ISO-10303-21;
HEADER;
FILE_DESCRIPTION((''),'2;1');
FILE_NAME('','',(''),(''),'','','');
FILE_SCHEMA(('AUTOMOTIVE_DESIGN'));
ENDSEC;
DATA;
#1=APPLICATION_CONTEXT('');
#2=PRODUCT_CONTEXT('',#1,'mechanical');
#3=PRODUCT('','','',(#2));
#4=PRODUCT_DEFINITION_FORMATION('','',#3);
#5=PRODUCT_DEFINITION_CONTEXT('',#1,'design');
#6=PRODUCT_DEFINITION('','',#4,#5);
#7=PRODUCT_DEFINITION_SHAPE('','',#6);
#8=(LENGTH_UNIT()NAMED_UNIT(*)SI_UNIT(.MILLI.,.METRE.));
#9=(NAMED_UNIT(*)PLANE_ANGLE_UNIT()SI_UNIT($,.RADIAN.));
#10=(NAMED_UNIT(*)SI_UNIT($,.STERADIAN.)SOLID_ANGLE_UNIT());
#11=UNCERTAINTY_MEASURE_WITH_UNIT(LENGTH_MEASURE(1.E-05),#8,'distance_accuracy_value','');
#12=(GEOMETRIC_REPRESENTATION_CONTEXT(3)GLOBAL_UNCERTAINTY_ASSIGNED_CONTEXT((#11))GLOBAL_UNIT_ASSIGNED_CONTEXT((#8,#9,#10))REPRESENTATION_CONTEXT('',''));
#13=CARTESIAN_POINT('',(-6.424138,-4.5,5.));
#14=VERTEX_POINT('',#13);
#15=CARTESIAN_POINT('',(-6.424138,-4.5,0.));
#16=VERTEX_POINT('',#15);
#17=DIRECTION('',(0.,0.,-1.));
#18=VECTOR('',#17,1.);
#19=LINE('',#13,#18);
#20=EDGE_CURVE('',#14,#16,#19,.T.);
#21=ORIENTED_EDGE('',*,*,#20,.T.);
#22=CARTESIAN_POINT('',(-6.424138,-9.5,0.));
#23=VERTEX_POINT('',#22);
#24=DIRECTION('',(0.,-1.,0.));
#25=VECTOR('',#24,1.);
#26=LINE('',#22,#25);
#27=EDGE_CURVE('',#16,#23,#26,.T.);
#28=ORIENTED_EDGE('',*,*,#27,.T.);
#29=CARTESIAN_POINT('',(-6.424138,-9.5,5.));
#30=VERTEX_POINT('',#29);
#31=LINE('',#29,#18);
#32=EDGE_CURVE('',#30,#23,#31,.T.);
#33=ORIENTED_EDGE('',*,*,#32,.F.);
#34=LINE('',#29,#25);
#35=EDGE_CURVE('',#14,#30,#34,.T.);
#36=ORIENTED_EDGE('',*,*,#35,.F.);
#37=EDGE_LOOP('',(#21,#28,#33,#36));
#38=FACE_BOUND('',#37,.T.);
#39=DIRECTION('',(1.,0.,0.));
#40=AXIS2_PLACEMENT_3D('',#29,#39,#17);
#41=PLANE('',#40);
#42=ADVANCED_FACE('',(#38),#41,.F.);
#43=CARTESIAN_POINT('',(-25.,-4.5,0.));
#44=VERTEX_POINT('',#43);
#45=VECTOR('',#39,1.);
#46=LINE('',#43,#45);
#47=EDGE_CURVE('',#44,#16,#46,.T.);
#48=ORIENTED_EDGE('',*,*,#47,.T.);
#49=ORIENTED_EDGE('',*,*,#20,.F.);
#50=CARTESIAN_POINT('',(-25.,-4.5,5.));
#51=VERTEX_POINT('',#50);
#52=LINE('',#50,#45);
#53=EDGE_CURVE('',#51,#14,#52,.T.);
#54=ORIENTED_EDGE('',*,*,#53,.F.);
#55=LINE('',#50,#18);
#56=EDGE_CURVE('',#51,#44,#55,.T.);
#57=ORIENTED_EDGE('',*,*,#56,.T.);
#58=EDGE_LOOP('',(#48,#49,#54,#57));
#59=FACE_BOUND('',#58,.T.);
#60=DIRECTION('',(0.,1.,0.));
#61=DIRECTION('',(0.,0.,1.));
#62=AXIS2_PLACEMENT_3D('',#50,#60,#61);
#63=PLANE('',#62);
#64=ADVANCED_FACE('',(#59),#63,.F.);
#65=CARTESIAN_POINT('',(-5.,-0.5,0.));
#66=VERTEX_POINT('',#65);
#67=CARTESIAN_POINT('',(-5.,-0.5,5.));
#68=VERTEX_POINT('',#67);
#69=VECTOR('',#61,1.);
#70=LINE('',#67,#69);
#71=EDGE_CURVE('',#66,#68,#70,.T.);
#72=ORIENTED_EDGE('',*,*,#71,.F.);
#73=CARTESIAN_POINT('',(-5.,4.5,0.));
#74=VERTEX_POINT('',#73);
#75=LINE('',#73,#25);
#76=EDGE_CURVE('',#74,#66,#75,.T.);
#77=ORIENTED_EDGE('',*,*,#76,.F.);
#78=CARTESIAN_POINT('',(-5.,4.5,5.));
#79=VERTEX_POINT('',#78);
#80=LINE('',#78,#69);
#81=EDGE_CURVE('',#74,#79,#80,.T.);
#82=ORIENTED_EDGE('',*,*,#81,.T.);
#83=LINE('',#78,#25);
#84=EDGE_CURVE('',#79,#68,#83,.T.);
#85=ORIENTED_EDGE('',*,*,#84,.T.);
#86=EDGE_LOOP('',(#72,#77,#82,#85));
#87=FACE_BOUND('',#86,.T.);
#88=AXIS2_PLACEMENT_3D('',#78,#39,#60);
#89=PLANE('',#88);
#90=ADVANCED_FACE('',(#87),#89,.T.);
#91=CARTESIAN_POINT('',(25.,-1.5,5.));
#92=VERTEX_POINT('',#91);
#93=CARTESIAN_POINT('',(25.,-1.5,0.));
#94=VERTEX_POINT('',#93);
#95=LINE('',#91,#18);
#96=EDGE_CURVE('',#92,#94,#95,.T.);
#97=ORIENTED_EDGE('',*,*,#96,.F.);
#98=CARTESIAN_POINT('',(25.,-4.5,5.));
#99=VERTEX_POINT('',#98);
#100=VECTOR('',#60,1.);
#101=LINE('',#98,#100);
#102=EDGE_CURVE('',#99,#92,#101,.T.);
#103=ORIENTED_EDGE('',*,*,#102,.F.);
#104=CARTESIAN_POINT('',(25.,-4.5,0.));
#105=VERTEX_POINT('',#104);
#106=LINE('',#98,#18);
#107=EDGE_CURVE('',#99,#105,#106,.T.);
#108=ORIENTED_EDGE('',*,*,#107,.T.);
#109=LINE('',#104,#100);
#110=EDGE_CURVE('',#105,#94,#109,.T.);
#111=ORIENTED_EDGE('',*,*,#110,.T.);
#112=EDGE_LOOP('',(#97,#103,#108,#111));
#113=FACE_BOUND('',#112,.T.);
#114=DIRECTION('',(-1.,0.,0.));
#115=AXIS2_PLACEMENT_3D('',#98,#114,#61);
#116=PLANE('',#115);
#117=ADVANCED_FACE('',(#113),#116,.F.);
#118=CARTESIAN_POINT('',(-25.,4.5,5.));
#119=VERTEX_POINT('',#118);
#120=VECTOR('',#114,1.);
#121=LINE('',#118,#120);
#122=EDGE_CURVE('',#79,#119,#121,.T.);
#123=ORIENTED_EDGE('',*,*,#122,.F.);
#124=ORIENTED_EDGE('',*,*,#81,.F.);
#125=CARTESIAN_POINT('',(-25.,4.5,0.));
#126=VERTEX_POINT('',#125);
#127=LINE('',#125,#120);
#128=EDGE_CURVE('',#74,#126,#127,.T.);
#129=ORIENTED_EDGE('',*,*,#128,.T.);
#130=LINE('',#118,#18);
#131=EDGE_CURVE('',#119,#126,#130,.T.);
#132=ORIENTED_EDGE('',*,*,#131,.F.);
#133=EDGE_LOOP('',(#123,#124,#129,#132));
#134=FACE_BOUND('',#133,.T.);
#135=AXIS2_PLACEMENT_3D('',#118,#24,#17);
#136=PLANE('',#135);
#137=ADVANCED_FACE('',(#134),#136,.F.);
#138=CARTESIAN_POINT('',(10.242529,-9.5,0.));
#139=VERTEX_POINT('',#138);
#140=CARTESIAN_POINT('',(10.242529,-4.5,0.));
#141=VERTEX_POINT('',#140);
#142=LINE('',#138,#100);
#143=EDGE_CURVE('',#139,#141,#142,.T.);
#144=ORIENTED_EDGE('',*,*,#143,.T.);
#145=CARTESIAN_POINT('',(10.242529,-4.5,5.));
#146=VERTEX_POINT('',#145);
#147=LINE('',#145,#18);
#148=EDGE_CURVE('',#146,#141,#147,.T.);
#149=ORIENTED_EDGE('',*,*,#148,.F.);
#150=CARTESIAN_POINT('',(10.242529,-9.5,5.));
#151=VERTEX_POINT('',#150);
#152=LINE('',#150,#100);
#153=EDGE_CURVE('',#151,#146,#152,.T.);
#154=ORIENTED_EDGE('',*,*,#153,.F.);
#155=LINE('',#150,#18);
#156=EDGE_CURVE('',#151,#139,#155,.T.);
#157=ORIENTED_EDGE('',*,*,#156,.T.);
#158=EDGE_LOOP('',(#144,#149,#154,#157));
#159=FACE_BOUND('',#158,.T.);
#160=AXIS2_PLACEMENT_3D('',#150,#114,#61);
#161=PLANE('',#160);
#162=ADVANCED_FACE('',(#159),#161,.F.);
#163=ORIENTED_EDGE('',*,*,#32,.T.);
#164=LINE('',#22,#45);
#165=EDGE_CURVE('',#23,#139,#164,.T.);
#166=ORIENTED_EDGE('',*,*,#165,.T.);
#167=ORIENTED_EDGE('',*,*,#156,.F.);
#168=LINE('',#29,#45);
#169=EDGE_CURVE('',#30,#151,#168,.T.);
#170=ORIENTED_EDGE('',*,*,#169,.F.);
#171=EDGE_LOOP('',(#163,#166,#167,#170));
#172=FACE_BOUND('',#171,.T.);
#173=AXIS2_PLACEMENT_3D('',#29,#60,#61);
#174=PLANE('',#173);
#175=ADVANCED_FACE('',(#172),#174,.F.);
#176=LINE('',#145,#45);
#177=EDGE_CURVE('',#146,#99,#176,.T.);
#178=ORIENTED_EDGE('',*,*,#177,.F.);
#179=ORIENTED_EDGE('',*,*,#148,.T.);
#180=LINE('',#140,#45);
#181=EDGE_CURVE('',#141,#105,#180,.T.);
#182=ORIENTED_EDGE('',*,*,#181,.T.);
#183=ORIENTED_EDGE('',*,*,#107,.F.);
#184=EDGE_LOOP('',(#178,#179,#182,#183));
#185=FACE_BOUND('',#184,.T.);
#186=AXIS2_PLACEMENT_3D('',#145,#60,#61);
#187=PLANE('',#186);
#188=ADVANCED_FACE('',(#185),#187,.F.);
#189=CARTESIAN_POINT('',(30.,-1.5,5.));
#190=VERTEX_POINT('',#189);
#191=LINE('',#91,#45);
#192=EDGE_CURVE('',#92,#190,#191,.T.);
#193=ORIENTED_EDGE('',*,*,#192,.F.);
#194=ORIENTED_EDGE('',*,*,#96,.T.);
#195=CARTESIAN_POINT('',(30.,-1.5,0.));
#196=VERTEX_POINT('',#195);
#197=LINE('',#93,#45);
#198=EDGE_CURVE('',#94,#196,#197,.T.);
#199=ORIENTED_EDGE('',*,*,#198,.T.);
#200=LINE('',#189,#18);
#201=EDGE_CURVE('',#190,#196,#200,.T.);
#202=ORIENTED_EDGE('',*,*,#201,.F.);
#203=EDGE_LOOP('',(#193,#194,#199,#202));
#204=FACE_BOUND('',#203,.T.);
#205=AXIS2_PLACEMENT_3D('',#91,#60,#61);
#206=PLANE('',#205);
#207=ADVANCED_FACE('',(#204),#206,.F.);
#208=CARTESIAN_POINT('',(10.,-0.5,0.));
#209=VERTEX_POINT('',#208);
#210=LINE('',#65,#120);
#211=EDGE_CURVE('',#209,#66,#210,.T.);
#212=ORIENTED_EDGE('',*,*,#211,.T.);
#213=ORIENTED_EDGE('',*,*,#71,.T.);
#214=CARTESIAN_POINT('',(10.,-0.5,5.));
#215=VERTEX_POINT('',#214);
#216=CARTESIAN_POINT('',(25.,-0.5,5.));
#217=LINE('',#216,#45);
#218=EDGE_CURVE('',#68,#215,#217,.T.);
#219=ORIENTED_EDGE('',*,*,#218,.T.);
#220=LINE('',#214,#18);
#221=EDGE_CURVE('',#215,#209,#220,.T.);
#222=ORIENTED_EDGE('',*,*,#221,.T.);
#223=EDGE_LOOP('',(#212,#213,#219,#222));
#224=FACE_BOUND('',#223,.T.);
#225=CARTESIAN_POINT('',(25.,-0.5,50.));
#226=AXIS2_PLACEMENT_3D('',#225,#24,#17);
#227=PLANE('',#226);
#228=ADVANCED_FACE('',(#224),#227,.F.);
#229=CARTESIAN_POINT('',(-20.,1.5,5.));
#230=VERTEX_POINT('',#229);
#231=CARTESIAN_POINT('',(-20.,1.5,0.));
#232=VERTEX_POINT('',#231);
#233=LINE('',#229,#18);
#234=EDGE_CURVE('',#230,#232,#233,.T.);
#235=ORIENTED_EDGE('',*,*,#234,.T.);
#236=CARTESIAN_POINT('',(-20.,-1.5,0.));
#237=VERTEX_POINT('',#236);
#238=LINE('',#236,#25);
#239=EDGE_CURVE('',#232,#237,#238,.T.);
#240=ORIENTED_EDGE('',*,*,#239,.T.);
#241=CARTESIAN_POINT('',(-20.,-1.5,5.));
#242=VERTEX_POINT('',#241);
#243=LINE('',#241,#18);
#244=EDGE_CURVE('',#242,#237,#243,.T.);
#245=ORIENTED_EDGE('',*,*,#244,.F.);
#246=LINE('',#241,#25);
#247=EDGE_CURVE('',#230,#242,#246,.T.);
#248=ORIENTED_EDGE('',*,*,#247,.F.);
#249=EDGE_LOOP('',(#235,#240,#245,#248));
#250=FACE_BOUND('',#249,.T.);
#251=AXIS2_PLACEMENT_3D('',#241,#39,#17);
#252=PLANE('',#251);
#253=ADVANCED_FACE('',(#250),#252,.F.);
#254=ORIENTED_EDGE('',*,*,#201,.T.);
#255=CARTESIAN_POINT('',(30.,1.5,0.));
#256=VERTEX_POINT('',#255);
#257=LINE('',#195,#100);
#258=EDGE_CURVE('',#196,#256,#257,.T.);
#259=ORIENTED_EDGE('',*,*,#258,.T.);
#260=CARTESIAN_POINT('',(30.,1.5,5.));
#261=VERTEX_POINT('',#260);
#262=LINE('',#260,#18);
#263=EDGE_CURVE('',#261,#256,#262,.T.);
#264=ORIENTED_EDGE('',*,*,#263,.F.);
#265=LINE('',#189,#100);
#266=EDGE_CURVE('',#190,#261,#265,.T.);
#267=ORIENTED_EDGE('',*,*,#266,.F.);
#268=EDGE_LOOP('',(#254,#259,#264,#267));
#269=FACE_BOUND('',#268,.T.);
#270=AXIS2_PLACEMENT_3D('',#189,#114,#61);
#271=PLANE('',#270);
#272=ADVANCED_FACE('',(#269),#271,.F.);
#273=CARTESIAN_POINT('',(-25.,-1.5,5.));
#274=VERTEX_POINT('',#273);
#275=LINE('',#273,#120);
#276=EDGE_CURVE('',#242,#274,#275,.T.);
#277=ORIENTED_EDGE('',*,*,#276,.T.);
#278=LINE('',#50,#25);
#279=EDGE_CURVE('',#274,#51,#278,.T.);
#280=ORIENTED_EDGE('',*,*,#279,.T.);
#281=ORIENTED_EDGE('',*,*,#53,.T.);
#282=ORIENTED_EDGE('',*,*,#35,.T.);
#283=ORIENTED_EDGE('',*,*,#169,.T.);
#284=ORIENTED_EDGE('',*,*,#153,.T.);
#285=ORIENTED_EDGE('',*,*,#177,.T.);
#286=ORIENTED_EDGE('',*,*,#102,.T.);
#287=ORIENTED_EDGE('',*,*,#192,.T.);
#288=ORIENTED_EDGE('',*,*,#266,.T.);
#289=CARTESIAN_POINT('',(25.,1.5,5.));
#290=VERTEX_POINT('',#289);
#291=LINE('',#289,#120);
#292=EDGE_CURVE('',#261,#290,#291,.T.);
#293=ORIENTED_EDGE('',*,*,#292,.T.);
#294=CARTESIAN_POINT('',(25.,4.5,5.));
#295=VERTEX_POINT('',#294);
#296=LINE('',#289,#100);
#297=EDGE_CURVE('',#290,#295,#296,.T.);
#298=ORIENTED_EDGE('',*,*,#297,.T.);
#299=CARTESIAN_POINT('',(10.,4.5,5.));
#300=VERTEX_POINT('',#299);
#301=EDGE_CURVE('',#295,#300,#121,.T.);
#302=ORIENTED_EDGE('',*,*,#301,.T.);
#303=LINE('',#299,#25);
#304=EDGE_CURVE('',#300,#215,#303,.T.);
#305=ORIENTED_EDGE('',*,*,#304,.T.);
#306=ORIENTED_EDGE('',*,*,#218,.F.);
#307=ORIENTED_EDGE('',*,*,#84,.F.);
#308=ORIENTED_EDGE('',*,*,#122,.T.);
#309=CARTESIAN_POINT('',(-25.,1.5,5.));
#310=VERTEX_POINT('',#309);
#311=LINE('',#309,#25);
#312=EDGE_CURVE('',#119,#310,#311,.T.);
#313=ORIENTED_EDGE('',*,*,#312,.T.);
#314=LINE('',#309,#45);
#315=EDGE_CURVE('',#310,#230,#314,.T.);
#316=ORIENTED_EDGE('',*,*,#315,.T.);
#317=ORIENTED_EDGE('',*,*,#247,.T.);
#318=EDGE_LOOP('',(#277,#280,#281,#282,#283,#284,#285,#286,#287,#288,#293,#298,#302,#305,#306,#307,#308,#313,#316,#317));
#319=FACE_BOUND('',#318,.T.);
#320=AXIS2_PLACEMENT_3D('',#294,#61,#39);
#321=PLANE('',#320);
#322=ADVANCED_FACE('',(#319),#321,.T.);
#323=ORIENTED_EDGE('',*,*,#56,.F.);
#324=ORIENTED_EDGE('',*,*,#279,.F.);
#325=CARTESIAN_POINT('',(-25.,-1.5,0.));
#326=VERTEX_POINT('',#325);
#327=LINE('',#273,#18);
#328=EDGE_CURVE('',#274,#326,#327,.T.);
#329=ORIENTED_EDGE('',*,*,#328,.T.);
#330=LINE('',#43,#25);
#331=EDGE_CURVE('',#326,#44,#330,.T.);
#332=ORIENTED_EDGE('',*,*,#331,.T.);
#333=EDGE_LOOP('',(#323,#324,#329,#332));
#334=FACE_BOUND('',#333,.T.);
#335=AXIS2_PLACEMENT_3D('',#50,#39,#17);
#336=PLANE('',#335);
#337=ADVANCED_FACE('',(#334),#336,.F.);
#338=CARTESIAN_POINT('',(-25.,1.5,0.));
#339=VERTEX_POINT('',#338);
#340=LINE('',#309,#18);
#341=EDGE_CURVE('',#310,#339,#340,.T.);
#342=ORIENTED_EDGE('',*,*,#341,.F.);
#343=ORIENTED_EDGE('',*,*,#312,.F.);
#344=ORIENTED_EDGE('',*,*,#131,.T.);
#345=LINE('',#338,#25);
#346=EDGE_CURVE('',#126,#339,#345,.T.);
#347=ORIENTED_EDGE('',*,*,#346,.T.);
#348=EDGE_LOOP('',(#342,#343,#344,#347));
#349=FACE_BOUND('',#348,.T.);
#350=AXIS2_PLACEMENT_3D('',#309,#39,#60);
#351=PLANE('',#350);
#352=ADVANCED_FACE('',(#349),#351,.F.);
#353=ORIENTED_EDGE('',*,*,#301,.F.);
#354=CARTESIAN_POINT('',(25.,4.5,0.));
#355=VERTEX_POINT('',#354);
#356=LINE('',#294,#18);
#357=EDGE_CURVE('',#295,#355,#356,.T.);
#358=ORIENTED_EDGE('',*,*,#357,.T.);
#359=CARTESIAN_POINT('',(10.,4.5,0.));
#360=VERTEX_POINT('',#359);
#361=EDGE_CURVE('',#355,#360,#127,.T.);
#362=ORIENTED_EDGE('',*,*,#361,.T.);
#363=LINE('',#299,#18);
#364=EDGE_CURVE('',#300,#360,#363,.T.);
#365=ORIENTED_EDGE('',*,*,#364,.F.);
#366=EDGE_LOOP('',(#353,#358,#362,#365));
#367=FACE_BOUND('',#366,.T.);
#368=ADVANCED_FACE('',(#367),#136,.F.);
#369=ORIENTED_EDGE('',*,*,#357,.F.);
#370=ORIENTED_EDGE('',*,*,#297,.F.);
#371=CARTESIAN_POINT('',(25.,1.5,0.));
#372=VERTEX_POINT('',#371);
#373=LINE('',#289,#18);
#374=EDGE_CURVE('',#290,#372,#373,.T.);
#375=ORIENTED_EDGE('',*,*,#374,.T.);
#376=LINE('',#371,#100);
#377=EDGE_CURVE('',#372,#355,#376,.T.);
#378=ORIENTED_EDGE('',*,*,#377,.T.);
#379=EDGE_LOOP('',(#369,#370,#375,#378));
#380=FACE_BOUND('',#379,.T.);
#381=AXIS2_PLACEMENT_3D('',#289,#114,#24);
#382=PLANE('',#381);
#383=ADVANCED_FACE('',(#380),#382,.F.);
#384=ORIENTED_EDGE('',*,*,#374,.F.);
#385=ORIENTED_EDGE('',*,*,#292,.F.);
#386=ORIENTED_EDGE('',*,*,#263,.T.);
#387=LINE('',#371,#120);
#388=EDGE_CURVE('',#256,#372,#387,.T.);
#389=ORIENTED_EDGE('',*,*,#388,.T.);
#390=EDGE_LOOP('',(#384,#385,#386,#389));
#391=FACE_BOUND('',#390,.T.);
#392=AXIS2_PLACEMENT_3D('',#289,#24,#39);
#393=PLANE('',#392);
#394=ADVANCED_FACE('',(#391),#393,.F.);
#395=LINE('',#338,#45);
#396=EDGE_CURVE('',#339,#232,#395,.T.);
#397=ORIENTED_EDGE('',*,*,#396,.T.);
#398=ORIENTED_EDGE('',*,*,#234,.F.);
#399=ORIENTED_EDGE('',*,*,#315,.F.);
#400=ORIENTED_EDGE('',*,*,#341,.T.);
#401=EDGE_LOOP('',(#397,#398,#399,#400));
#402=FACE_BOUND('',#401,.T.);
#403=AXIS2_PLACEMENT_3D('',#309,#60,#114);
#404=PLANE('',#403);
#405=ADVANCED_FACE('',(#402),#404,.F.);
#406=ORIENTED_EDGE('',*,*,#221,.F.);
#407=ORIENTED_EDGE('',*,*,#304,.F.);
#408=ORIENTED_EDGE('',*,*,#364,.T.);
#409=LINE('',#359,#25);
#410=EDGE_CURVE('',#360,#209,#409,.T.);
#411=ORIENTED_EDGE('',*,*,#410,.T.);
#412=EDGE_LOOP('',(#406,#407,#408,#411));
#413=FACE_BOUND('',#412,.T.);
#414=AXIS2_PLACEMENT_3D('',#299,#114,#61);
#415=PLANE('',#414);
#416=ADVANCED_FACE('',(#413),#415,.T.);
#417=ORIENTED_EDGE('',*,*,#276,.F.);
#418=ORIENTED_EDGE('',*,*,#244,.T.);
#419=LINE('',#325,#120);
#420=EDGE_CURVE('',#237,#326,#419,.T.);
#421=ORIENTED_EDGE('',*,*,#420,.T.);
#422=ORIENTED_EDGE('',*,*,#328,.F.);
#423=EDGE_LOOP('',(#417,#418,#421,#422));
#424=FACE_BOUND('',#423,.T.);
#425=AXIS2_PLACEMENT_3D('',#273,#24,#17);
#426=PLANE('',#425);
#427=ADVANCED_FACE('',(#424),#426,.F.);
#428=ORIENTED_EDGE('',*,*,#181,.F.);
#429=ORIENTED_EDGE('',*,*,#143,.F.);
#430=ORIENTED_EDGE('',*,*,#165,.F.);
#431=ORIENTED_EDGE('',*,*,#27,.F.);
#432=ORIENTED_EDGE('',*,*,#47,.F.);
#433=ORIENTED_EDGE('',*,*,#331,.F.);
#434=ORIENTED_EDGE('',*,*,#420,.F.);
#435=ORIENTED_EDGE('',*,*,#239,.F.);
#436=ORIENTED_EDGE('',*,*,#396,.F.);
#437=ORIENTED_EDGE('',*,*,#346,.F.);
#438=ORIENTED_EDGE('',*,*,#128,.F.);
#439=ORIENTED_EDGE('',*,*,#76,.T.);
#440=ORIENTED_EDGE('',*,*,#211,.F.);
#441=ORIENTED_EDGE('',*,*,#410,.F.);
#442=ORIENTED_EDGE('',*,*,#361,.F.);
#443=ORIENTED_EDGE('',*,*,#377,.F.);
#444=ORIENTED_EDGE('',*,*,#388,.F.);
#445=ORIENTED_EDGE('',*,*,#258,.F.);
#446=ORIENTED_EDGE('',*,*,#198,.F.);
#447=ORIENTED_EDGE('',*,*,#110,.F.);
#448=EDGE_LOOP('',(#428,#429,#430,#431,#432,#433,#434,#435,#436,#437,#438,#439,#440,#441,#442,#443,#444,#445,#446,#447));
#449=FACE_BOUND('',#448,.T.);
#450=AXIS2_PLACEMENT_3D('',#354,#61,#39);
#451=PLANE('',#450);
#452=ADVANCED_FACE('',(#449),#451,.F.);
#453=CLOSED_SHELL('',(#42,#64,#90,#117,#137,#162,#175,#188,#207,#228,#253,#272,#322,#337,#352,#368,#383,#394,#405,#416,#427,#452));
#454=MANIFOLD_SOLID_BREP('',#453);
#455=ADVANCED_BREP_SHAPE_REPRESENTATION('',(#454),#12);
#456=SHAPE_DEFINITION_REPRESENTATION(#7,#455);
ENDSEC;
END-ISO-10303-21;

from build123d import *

# Parameters (mm, degrees)
BOSS_EXTRUDE1_DEPTH = 5
CAVITY1_START       = -0.5
CAVITY1_OUTLINE_W   = 15
CAVITY1_OUTLINE_H   = 5
CAVITY1_DEPTH       = 5


# Read off the part's stored shape, not the designer's step: Cavity1
with BuildPart() as part:
    # Sketch1 → Boss-Extrude1 (new body)
    with BuildSketch(Plane.XY):
        Polygon((25, 1.5), (25, 4.5), (-25, 4.5), (-25, 1.5), (-20, 1.5), (-20, -1.5), (-25, -1.5), (-25, -4.5), (-6.424137908, -4.5), (-6.424137908, -9.5), (10.242528759, -9.5), (10.242528759, -4.5), (25, -4.5), (25, -1.5), (30, -1.5), (30, 1.5), align=None)
    extrude(amount=BOSS_EXTRUDE1_DEPTH)

    # Cavity1 outline → Cavity1 (cut)
    with BuildSketch(Plane(origin=(0, 0, 0), x_dir=(1, 0, 0), z_dir=(0, 1, 0)).offset(CAVITY1_START)):
        with Locations((2.5, -2.5)):
            Rectangle(CAVITY1_OUTLINE_W, CAVITY1_OUTLINE_H)
    extrude(amount=CAVITY1_DEPTH, mode=Mode.SUBTRACT)


solid = part.part
